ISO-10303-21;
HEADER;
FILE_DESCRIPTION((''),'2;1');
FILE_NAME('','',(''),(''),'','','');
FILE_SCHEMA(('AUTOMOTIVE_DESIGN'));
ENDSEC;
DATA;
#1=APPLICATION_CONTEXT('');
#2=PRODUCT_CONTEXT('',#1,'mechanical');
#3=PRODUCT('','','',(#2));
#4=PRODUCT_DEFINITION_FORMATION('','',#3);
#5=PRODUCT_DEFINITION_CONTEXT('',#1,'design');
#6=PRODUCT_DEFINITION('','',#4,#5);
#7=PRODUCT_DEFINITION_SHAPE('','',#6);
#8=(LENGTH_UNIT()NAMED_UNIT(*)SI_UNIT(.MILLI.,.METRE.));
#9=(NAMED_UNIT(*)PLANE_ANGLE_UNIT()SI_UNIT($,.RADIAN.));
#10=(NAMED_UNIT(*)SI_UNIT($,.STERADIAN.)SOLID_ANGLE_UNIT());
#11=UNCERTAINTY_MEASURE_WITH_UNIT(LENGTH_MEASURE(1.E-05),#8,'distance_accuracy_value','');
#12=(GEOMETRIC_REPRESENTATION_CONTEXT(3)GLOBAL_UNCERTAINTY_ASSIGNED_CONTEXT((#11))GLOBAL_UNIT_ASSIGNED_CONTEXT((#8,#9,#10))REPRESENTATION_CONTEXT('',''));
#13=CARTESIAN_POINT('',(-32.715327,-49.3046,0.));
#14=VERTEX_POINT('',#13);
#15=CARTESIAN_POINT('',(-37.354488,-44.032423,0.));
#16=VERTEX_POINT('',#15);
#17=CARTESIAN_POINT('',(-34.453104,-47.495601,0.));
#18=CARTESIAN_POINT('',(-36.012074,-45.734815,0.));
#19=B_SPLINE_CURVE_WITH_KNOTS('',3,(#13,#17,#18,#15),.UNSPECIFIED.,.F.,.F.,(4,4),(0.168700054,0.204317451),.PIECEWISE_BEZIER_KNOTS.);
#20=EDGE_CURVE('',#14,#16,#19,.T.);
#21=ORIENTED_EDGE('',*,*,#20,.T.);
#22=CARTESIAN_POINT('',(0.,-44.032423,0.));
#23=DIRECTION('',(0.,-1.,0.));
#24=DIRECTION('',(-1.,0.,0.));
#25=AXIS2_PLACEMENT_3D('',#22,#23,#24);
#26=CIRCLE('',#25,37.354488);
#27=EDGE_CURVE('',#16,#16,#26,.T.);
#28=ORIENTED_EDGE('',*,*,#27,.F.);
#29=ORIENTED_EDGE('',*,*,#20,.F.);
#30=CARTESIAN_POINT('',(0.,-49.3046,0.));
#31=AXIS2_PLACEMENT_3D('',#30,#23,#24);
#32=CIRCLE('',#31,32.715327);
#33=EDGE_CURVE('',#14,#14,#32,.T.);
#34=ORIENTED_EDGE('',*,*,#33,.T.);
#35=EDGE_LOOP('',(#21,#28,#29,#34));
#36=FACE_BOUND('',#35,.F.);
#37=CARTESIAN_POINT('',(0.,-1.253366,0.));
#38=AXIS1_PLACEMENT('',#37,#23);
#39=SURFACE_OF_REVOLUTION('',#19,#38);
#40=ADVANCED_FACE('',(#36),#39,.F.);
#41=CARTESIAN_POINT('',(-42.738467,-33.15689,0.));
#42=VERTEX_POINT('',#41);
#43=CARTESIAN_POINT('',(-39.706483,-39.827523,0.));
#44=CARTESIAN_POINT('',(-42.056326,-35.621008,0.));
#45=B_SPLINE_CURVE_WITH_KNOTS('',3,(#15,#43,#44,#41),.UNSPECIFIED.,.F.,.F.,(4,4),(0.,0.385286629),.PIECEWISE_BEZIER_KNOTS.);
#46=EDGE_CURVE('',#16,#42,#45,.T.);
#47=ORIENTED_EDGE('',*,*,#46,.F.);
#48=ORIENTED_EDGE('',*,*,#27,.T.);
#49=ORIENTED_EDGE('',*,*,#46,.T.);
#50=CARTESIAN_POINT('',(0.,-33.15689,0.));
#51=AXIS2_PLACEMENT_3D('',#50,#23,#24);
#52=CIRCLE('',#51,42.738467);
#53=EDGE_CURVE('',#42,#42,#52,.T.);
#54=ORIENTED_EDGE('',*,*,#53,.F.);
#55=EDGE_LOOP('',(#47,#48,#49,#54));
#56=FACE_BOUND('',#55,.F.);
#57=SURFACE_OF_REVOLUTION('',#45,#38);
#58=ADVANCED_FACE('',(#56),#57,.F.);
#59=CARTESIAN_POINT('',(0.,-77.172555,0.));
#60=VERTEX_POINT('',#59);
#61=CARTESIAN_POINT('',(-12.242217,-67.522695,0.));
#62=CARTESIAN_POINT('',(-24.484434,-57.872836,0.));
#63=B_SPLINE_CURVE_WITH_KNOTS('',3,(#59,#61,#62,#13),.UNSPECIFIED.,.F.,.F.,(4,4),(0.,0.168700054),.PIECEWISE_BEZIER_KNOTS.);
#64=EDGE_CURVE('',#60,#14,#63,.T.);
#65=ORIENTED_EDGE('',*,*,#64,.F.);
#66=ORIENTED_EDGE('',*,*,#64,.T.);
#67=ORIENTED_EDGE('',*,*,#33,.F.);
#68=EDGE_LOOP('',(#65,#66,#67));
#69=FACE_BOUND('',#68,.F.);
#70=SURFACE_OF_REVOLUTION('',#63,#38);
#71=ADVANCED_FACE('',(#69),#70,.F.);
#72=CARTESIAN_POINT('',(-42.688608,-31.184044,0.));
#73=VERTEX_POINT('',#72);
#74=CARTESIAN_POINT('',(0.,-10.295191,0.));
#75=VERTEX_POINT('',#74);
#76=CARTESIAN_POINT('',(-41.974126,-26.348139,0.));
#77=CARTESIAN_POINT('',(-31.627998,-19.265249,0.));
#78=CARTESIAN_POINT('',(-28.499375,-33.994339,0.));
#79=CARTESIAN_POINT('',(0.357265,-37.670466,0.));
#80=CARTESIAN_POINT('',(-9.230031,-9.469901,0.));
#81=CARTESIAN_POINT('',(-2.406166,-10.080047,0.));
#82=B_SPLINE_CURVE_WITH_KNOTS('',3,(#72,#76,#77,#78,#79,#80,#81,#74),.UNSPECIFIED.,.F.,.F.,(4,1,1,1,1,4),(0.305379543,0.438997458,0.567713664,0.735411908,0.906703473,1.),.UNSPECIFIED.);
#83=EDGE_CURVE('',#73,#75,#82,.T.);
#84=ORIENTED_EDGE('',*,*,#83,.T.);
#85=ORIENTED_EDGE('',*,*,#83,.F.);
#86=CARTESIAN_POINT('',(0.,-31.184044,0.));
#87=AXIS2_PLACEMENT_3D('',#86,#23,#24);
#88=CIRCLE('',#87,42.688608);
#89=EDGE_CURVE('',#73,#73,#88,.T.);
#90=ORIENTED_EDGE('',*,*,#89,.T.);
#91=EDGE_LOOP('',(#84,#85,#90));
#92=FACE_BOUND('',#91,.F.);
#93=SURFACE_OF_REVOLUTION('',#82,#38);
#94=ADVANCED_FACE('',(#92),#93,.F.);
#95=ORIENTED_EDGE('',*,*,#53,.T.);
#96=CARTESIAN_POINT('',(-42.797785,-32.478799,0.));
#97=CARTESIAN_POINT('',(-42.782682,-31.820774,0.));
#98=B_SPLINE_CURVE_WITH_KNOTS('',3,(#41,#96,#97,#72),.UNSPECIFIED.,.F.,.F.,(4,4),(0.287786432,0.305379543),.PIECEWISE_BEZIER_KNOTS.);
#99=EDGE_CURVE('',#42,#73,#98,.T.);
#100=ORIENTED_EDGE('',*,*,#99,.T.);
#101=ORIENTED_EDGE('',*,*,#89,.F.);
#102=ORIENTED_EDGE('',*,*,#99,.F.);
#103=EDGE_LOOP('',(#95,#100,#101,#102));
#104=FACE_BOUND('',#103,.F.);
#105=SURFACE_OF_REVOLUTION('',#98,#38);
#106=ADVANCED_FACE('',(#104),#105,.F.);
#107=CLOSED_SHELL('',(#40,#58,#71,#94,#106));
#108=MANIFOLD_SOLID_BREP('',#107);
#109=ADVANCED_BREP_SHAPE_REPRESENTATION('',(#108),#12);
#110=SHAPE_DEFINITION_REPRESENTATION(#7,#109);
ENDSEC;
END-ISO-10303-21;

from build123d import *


with BuildPart() as f1:
    # F0 (on Top) → F1 (revolve)
    with BuildSketch(Plane.XY):
        with BuildLine():
            Line((0, -77.1725550294), (0, -10.2951908484))
            add(Edge.make_bspline(
                [(-42.6886081696, -31.1840437353), (-41.9741262251, -26.3481394016), (-31.6279975873, -19.2652491052), (-28.4993753923, -33.9943389303), (0.3572648065, -37.670465576), (-9.2300311467, -9.4699013844), (-2.4061661468, -10.0800470923), (0, -10.2951908484)],
                knots=[0.3053795427, 0.3053795427, 0.3053795427, 0.3053795427, 0.4389974584, 0.5677136643, 0.7354119084, 0.9067034725, 1, 1, 1, 1], degree=3))
            add(Edge.make_bspline(
                [(-42.7384666865, -33.156890188), (-42.7977850628, -32.4787986109), (-42.7826820789, -31.8207742077), (-42.6886081696, -31.1840437353)],
                knots=[0.2877864324, 0.2877864324, 0.2877864324, 0.2877864324, 0.3053795427, 0.3053795427, 0.3053795427, 0.3053795427], degree=3))
            add(Edge.make_bspline(
                [(-37.354488354, -44.0324225911), (-39.7064828767, -39.8275234586), (-42.0563257906, -35.6210082892), (-42.7384666865, -33.156890188)],
                knots=[0, 0, 0, 0, 0.3852866289, 0.3852866289, 0.3852866289, 0.3852866289], degree=3))
            add(Edge.make_bspline(
                [(-32.7153271789, -49.3045997466), (-34.4531037106, -47.4956005938), (-36.0120744387, -45.7348151143), (-37.354488354, -44.0324225911)],
                knots=[0.1687000542, 0.1687000542, 0.1687000542, 0.1687000542, 0.2043174512, 0.2043174512, 0.2043174512, 0.2043174512], degree=3))
            add(Edge.make_bspline(
                [(0, -77.1725550294), (-12.2422169317, -67.5226952717), (-24.4844338634, -57.8728355141), (-32.7153271789, -49.3045997466)],
                knots=[0, 0, 0, 0, 0.1687000542, 0.1687000542, 0.1687000542, 0.1687000542], degree=3))
        make_face()
    revolve(axis=Axis((0, -1.2533664703, 0), (0, -1, 0)))


solid = f1.part
